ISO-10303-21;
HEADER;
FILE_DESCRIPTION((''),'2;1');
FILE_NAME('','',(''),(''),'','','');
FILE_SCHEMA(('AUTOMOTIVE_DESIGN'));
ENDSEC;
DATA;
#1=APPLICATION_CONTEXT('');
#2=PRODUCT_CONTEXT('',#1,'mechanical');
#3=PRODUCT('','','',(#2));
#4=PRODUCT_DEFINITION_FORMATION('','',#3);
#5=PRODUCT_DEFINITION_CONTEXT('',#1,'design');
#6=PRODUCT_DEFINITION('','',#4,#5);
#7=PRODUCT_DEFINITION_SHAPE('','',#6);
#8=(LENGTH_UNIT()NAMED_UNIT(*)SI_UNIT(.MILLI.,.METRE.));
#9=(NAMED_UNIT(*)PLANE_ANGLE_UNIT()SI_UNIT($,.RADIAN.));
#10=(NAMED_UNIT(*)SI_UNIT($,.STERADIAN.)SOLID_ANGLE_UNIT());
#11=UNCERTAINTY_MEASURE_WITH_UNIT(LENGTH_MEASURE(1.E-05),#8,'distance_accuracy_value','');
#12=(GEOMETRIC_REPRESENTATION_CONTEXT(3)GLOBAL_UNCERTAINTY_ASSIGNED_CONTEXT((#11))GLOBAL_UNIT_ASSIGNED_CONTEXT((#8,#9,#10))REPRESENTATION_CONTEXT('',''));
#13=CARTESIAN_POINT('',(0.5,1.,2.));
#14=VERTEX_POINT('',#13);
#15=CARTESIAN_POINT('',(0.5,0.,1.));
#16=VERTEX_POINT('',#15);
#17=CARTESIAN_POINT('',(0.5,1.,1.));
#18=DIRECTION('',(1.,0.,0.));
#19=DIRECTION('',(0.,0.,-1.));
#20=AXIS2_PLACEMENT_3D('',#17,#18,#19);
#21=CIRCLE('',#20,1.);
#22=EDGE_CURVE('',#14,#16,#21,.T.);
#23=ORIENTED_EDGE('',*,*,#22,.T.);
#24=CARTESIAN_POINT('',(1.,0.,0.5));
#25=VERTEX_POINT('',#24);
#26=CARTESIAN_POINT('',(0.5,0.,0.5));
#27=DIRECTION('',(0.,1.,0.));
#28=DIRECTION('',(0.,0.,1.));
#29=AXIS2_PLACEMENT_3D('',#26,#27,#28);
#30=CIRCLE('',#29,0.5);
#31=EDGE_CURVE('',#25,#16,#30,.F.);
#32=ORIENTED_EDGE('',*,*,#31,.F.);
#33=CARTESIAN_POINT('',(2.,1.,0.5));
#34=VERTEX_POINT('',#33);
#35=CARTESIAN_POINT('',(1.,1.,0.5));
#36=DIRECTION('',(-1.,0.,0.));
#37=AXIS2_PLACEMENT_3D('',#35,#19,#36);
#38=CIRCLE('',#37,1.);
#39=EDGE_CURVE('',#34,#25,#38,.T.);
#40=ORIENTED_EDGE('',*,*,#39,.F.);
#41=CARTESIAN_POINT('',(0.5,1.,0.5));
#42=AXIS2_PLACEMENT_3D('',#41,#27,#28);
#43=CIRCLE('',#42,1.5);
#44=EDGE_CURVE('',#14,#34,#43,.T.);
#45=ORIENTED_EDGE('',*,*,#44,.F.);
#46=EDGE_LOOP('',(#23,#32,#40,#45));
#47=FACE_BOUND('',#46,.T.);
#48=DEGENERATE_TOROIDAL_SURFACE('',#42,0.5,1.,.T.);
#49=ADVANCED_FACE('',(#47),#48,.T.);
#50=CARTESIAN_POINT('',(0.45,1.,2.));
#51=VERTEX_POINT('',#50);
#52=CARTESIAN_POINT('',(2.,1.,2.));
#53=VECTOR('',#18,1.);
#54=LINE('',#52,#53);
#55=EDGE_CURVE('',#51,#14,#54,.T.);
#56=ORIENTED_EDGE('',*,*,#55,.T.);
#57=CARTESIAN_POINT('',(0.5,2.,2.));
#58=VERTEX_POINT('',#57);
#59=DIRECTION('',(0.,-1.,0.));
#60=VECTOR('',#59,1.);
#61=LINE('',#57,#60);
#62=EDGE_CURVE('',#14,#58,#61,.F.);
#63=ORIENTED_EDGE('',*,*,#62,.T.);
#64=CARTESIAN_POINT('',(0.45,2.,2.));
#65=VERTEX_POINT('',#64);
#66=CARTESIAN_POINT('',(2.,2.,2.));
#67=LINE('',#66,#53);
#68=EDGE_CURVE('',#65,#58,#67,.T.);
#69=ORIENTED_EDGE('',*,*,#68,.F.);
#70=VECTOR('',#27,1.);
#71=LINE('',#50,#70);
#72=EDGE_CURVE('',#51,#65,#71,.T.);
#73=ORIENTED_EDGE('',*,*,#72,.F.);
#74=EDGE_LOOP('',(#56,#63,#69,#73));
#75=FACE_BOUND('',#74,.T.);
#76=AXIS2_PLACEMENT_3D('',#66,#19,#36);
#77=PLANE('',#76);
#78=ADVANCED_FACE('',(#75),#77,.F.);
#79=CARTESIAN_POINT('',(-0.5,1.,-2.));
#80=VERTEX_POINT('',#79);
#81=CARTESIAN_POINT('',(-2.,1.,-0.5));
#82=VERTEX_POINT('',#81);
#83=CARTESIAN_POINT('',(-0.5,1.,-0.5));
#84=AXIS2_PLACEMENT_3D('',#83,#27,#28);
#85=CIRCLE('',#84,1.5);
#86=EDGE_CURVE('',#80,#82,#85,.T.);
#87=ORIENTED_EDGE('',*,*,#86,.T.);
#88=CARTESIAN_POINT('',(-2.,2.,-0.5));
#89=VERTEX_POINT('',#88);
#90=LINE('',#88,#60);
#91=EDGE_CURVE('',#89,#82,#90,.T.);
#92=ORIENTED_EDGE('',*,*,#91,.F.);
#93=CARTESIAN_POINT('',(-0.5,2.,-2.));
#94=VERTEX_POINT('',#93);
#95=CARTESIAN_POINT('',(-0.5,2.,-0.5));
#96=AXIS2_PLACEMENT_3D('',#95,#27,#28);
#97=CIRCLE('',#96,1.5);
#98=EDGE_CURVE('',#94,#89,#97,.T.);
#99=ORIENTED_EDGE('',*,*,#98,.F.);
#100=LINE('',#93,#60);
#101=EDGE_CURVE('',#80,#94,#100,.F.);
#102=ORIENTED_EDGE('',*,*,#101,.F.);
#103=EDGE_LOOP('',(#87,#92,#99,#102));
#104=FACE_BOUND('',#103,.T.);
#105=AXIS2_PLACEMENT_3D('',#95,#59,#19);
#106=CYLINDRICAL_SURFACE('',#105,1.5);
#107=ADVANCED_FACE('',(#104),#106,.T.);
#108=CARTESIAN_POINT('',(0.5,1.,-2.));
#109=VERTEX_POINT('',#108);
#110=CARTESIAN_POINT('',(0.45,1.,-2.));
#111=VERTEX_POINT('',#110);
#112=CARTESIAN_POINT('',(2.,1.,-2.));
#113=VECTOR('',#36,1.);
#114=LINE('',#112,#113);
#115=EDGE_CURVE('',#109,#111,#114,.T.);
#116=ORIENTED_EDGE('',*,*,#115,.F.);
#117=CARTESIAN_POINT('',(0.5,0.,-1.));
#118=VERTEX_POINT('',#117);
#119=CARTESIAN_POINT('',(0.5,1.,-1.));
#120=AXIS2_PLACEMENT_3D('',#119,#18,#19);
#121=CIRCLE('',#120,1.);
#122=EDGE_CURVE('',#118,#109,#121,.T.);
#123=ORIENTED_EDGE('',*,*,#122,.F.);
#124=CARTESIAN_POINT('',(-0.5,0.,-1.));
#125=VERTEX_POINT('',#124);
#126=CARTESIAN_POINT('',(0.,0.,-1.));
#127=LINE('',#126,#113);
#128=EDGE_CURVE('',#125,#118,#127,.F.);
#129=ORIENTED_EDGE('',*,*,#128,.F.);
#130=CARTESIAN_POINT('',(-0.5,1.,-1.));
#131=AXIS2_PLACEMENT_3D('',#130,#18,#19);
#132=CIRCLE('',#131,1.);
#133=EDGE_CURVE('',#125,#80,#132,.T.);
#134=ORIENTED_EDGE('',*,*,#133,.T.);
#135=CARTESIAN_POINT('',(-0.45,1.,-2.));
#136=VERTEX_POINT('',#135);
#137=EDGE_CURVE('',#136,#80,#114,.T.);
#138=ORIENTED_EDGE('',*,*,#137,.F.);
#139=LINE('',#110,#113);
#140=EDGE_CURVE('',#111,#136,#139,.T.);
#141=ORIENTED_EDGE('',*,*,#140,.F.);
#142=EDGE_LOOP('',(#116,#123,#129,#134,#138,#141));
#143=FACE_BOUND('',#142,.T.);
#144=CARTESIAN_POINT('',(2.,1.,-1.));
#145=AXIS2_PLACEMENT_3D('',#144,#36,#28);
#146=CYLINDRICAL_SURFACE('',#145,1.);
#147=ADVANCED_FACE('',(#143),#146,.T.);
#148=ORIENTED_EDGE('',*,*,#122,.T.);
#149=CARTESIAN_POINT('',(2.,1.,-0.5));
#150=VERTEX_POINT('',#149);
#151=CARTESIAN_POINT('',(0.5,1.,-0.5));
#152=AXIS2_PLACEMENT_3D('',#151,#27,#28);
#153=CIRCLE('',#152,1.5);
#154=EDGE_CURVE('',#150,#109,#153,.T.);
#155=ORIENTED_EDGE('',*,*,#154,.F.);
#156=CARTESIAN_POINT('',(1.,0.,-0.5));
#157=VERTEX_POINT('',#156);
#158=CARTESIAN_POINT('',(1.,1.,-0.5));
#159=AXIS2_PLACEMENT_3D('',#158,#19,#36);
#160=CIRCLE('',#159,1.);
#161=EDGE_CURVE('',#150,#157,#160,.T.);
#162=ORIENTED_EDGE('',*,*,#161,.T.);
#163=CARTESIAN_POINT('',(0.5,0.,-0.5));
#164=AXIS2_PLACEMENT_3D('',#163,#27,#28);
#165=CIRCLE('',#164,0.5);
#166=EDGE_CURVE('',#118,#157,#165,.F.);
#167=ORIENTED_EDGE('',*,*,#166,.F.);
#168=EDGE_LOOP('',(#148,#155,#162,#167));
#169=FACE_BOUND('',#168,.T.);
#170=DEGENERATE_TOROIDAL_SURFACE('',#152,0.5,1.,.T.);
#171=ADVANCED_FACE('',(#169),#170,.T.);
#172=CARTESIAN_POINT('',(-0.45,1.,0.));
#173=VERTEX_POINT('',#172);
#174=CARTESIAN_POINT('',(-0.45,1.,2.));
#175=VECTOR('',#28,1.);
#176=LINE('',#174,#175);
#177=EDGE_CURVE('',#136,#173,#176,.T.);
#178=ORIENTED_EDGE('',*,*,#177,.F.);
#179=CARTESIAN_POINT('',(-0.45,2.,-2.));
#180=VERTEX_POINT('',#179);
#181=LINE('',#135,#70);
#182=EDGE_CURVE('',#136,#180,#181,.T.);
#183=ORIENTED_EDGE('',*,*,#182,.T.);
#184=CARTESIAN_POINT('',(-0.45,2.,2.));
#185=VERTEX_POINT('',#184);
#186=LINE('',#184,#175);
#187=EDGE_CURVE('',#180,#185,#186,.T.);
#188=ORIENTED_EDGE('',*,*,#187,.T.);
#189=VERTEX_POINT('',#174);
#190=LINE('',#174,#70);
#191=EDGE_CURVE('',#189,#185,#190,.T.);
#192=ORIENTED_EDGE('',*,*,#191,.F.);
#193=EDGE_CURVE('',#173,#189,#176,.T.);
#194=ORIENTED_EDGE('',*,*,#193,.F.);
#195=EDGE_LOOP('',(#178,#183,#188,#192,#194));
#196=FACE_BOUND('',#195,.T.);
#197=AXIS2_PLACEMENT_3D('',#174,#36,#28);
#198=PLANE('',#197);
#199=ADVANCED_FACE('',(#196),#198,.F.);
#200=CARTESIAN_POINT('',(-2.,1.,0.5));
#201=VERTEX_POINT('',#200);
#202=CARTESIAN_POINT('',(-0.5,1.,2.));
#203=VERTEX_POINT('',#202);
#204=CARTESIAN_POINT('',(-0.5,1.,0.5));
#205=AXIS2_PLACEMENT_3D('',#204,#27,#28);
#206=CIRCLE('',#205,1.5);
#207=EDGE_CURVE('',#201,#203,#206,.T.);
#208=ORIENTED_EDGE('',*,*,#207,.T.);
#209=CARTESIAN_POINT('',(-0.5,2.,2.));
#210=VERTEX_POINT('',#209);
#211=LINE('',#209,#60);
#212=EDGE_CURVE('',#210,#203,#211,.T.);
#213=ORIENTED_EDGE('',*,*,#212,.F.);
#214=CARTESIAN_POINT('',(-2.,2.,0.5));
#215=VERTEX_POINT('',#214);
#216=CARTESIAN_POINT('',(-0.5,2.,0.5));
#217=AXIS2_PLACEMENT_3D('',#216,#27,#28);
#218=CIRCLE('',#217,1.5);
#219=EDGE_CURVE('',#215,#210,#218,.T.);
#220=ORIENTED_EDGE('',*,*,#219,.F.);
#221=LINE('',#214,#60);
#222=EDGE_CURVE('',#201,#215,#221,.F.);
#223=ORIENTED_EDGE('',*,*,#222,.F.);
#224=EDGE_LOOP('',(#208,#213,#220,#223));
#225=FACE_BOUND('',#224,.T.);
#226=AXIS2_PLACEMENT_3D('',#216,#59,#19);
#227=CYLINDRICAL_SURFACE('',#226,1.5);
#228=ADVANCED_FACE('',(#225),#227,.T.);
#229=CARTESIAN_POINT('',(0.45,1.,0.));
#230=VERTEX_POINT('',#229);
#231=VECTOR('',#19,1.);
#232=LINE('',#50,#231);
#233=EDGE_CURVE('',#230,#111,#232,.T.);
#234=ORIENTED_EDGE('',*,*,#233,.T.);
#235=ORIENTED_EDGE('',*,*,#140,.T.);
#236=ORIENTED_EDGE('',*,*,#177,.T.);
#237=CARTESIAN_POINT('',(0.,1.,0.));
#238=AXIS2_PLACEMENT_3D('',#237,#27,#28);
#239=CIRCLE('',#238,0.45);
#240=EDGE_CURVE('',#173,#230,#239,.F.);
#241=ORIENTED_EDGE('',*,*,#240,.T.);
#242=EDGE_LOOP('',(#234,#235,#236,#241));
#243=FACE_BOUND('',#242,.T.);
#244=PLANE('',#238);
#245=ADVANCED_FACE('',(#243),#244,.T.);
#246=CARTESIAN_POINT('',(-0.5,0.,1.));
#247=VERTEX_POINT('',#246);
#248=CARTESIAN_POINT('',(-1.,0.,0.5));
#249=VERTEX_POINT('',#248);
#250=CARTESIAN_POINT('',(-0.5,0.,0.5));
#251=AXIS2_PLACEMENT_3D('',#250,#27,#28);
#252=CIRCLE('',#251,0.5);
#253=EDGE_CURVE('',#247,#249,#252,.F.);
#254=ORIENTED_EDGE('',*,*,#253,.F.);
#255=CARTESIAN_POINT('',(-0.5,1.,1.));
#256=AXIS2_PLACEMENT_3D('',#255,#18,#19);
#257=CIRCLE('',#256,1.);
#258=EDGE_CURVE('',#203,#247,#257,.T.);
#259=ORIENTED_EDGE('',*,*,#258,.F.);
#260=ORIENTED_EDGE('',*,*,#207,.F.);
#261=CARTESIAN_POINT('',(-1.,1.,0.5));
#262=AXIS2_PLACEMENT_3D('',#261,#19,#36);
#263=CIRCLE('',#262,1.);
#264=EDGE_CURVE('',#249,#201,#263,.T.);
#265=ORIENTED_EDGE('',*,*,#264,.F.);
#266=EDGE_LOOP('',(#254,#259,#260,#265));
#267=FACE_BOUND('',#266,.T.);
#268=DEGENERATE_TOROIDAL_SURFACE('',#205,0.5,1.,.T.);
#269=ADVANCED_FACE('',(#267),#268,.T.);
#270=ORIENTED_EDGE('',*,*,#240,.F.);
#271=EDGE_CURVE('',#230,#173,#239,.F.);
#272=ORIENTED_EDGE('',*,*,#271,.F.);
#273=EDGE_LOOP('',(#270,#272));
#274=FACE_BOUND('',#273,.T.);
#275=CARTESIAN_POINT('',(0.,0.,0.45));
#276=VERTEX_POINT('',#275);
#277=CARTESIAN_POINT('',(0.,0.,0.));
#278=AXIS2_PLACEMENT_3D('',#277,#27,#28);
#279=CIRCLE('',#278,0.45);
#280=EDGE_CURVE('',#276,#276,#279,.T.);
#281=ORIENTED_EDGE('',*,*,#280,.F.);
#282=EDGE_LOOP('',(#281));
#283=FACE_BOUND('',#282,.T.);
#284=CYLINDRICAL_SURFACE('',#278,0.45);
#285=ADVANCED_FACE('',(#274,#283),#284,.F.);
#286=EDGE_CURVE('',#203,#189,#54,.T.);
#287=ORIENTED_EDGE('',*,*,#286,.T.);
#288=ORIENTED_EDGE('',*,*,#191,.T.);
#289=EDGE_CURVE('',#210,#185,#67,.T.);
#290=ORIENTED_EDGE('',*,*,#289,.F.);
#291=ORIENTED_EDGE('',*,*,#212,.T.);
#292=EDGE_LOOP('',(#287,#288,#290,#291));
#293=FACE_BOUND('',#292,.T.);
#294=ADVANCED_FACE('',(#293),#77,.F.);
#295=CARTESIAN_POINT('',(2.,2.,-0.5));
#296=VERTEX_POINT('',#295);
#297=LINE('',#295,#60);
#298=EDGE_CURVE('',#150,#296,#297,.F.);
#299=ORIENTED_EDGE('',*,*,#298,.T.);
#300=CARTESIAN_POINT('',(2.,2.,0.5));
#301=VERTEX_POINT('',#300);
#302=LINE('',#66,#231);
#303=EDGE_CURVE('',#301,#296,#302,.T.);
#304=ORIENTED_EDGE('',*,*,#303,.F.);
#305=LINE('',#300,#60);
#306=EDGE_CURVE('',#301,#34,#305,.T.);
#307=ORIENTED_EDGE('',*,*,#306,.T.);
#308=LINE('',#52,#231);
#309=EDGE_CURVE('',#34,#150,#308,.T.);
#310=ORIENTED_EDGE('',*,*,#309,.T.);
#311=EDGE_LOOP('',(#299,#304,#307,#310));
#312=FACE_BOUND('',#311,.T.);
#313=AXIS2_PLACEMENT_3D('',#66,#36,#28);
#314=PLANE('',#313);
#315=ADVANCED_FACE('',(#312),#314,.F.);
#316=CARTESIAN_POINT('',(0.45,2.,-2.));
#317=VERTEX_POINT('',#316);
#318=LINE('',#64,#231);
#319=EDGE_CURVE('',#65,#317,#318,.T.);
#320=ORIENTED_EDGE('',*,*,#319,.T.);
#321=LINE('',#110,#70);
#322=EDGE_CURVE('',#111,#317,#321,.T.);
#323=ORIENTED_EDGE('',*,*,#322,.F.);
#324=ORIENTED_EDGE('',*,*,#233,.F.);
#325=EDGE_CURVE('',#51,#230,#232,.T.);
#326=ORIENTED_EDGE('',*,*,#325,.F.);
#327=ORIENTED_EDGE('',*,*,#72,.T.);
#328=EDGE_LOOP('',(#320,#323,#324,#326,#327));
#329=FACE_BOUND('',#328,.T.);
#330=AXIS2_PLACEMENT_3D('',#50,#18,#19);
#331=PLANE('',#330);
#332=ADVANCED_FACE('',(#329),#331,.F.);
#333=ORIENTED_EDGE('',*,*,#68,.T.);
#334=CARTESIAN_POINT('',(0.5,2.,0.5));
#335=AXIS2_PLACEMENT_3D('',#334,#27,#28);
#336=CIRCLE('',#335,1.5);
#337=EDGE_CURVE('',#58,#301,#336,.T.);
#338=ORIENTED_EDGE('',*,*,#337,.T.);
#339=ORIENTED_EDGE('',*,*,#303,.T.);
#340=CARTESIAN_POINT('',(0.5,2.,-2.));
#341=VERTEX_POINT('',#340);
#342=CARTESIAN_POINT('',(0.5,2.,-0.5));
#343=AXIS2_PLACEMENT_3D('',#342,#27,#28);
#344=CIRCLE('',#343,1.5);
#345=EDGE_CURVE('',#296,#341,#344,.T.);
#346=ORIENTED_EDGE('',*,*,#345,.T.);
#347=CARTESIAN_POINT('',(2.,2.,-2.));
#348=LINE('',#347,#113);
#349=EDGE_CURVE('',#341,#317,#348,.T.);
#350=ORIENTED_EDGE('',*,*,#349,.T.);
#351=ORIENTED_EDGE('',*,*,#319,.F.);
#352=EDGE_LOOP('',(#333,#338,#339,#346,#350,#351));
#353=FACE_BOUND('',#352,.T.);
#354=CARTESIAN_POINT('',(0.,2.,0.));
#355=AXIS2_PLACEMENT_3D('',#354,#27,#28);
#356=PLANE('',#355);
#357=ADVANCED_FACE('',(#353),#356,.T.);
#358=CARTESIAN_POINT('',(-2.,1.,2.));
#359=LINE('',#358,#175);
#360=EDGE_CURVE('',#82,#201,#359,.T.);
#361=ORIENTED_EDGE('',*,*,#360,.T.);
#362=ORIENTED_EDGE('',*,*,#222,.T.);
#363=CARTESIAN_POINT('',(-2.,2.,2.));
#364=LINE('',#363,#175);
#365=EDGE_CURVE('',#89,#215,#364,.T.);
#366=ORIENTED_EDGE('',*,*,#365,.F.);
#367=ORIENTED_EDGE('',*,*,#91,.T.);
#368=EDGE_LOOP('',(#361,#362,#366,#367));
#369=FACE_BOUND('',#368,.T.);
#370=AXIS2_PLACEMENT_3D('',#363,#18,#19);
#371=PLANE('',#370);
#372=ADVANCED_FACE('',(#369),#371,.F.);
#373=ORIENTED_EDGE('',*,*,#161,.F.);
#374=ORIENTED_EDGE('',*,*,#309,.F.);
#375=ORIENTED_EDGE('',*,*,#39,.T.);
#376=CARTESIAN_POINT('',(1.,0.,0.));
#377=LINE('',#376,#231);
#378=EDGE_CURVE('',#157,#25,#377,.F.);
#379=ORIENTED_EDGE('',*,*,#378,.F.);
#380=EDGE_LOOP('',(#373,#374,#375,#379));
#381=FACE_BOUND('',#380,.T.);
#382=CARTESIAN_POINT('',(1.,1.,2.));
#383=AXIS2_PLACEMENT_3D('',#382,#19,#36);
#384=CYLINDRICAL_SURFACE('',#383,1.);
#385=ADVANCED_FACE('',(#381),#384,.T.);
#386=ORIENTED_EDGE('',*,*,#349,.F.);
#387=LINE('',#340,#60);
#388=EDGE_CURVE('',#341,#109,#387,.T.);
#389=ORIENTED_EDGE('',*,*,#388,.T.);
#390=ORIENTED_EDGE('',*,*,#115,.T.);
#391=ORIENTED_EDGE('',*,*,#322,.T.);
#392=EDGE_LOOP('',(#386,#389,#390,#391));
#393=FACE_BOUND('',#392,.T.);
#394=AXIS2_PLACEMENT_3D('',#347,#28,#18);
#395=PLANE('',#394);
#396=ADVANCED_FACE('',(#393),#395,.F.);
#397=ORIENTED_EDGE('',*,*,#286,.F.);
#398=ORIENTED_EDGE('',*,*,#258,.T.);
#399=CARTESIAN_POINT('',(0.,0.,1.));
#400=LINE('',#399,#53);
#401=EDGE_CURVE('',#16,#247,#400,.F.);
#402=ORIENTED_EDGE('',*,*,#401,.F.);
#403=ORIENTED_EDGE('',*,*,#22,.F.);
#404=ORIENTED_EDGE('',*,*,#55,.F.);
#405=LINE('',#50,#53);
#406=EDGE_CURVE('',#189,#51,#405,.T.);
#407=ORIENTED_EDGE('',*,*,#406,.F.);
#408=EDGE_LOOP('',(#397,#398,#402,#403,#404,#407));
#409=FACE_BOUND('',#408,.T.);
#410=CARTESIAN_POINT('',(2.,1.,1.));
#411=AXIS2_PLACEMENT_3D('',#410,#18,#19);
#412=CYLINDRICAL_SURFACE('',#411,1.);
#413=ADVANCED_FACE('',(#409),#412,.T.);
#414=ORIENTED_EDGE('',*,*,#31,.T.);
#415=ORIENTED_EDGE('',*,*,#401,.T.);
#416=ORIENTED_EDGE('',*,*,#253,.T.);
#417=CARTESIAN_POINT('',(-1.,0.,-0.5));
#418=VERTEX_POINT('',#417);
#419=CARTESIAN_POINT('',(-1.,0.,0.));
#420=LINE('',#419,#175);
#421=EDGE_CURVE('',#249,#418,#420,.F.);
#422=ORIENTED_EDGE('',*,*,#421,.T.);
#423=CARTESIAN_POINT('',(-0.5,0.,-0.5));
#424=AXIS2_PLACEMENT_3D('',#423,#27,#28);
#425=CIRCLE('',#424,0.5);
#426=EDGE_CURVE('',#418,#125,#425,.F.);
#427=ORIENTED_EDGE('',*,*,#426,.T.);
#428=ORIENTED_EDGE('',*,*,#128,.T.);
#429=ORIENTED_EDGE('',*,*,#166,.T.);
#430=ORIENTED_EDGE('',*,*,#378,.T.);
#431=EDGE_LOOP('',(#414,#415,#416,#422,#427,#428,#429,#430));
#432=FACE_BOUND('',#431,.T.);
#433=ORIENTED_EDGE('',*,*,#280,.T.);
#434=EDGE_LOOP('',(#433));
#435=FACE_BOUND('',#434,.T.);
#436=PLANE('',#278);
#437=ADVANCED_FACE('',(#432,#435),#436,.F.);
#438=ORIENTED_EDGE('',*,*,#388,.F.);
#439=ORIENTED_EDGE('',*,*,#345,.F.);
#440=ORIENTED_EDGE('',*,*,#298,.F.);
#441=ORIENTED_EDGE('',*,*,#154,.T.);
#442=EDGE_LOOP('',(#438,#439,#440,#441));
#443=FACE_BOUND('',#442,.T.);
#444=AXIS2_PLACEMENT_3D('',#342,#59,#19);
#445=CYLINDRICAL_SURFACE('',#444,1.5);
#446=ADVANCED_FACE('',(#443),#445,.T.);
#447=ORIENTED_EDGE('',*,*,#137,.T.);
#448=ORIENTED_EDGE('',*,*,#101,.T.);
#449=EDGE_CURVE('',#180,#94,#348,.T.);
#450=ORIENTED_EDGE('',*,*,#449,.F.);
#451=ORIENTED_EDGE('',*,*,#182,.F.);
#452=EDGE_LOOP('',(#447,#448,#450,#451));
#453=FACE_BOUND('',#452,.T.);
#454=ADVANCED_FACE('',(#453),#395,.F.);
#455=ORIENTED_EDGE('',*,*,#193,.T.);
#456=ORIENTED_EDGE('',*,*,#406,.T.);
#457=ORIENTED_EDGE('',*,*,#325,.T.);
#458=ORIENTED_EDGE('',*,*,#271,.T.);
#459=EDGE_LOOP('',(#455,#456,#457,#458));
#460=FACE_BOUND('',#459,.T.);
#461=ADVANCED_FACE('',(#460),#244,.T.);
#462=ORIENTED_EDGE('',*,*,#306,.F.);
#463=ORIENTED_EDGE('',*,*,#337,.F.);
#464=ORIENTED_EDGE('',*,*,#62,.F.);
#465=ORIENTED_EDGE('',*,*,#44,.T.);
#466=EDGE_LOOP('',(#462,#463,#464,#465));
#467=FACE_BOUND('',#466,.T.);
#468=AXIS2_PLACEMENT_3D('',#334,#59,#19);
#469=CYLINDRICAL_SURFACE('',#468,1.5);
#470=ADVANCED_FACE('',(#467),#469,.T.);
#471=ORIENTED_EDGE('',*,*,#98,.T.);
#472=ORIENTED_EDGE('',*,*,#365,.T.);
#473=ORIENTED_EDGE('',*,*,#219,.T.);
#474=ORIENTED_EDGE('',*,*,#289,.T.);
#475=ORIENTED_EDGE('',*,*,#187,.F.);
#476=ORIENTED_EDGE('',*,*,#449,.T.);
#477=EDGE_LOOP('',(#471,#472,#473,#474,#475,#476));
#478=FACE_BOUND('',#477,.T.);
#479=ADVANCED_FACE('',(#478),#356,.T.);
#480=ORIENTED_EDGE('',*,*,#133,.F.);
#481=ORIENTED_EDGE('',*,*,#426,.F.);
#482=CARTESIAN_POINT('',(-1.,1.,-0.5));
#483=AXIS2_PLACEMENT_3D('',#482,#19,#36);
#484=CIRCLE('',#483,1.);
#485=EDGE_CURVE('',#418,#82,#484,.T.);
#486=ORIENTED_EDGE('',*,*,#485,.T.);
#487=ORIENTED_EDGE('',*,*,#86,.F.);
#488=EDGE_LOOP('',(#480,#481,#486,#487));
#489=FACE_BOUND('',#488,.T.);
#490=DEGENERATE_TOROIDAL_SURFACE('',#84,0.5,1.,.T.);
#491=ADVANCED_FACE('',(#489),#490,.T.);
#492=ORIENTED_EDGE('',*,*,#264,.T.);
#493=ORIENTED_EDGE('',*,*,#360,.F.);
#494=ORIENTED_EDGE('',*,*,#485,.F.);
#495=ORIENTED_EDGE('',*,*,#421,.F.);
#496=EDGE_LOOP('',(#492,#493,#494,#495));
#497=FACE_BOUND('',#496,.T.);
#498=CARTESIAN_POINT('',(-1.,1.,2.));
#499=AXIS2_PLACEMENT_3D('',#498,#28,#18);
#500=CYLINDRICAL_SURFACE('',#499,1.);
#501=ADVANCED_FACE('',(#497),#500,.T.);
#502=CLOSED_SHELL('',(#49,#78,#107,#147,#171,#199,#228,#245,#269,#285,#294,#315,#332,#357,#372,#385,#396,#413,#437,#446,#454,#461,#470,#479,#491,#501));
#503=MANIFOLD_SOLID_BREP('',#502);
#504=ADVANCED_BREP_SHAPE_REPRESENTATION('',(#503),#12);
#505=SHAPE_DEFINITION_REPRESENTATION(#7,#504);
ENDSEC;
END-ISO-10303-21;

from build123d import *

# Parameters (mm, degrees)
SKETCH_1_W          = 4
SKETCH_1_H          = 4
EXTRUDE_1_DEPTH     = 2
FILLET_1_R          = 1.5
SKETCH_2_R          = 0.45
CUT_EXTRUDE_1_DEPTH = 4.464101615
SKETCH_3_W          = 0.9
SKETCH_3_H          = 4
CUT_EXTRUDE_2_DEPTH = 1
FILLET_3_R          = 1


with BuildPart() as part:
    # 草图1 → 凸台-拉伸1 (new body)
    with BuildSketch(Plane(origin=(0, 0, 0), x_dir=(1, 0, 0), z_dir=(0, 1, 0))):
        Rectangle(SKETCH_1_W, SKETCH_1_H)
    extrude(amount=EXTRUDE_1_DEPTH)

    # 圆角1
    fillet_1_edges = [part.edges().sort_by_distance(p)[0] for p in [
        (-2, 1, -2),
        (2, 1, -2),
        (2, 1, 2),
        (-2, 1, 2),
    ]]
    fillet(fillet_1_edges, radius=FILLET_1_R)

    # 草图2 → 切除-拉伸1 (cut, through all)
    with BuildSketch(Plane(origin=(0, 2, 0), x_dir=(1, 0, 0), z_dir=(0, 1, 0))):
        with Locations(Location((0, 0, 0), (0, 0, 270))):
            Circle(SKETCH_2_R)
    extrude(amount=-CUT_EXTRUDE_1_DEPTH, mode=Mode.SUBTRACT)

    # 草图3 → 切除-拉伸2 (cut)
    with BuildSketch(Plane(origin=(0, 2, 0), x_dir=(1, 0, 0), z_dir=(0, 1, 0))):
        Rectangle(SKETCH_3_W, SKETCH_3_H)
    extrude(amount=-CUT_EXTRUDE_2_DEPTH, mode=Mode.SUBTRACT)

    # 圆角3
    fillet_3_edges = [part.edges().sort_by_distance(p)[0] for p in [
        (-2, 0, 0),
        (0, 0, -2),
        (2, 0, 0),
        (0, 0, 2),
        (-1.560660172, 0, 1.560660172),
        (1.560660172, 0, 1.560660172),
        (1.560660172, 0, -1.560660172),
        (-1.560660172, 0, -1.560660172),
    ]]
    fillet(fillet_3_edges, radius=FILLET_3_R - 0.0001)  # a hair under: the kernel refuses the full size


solid = part.part
